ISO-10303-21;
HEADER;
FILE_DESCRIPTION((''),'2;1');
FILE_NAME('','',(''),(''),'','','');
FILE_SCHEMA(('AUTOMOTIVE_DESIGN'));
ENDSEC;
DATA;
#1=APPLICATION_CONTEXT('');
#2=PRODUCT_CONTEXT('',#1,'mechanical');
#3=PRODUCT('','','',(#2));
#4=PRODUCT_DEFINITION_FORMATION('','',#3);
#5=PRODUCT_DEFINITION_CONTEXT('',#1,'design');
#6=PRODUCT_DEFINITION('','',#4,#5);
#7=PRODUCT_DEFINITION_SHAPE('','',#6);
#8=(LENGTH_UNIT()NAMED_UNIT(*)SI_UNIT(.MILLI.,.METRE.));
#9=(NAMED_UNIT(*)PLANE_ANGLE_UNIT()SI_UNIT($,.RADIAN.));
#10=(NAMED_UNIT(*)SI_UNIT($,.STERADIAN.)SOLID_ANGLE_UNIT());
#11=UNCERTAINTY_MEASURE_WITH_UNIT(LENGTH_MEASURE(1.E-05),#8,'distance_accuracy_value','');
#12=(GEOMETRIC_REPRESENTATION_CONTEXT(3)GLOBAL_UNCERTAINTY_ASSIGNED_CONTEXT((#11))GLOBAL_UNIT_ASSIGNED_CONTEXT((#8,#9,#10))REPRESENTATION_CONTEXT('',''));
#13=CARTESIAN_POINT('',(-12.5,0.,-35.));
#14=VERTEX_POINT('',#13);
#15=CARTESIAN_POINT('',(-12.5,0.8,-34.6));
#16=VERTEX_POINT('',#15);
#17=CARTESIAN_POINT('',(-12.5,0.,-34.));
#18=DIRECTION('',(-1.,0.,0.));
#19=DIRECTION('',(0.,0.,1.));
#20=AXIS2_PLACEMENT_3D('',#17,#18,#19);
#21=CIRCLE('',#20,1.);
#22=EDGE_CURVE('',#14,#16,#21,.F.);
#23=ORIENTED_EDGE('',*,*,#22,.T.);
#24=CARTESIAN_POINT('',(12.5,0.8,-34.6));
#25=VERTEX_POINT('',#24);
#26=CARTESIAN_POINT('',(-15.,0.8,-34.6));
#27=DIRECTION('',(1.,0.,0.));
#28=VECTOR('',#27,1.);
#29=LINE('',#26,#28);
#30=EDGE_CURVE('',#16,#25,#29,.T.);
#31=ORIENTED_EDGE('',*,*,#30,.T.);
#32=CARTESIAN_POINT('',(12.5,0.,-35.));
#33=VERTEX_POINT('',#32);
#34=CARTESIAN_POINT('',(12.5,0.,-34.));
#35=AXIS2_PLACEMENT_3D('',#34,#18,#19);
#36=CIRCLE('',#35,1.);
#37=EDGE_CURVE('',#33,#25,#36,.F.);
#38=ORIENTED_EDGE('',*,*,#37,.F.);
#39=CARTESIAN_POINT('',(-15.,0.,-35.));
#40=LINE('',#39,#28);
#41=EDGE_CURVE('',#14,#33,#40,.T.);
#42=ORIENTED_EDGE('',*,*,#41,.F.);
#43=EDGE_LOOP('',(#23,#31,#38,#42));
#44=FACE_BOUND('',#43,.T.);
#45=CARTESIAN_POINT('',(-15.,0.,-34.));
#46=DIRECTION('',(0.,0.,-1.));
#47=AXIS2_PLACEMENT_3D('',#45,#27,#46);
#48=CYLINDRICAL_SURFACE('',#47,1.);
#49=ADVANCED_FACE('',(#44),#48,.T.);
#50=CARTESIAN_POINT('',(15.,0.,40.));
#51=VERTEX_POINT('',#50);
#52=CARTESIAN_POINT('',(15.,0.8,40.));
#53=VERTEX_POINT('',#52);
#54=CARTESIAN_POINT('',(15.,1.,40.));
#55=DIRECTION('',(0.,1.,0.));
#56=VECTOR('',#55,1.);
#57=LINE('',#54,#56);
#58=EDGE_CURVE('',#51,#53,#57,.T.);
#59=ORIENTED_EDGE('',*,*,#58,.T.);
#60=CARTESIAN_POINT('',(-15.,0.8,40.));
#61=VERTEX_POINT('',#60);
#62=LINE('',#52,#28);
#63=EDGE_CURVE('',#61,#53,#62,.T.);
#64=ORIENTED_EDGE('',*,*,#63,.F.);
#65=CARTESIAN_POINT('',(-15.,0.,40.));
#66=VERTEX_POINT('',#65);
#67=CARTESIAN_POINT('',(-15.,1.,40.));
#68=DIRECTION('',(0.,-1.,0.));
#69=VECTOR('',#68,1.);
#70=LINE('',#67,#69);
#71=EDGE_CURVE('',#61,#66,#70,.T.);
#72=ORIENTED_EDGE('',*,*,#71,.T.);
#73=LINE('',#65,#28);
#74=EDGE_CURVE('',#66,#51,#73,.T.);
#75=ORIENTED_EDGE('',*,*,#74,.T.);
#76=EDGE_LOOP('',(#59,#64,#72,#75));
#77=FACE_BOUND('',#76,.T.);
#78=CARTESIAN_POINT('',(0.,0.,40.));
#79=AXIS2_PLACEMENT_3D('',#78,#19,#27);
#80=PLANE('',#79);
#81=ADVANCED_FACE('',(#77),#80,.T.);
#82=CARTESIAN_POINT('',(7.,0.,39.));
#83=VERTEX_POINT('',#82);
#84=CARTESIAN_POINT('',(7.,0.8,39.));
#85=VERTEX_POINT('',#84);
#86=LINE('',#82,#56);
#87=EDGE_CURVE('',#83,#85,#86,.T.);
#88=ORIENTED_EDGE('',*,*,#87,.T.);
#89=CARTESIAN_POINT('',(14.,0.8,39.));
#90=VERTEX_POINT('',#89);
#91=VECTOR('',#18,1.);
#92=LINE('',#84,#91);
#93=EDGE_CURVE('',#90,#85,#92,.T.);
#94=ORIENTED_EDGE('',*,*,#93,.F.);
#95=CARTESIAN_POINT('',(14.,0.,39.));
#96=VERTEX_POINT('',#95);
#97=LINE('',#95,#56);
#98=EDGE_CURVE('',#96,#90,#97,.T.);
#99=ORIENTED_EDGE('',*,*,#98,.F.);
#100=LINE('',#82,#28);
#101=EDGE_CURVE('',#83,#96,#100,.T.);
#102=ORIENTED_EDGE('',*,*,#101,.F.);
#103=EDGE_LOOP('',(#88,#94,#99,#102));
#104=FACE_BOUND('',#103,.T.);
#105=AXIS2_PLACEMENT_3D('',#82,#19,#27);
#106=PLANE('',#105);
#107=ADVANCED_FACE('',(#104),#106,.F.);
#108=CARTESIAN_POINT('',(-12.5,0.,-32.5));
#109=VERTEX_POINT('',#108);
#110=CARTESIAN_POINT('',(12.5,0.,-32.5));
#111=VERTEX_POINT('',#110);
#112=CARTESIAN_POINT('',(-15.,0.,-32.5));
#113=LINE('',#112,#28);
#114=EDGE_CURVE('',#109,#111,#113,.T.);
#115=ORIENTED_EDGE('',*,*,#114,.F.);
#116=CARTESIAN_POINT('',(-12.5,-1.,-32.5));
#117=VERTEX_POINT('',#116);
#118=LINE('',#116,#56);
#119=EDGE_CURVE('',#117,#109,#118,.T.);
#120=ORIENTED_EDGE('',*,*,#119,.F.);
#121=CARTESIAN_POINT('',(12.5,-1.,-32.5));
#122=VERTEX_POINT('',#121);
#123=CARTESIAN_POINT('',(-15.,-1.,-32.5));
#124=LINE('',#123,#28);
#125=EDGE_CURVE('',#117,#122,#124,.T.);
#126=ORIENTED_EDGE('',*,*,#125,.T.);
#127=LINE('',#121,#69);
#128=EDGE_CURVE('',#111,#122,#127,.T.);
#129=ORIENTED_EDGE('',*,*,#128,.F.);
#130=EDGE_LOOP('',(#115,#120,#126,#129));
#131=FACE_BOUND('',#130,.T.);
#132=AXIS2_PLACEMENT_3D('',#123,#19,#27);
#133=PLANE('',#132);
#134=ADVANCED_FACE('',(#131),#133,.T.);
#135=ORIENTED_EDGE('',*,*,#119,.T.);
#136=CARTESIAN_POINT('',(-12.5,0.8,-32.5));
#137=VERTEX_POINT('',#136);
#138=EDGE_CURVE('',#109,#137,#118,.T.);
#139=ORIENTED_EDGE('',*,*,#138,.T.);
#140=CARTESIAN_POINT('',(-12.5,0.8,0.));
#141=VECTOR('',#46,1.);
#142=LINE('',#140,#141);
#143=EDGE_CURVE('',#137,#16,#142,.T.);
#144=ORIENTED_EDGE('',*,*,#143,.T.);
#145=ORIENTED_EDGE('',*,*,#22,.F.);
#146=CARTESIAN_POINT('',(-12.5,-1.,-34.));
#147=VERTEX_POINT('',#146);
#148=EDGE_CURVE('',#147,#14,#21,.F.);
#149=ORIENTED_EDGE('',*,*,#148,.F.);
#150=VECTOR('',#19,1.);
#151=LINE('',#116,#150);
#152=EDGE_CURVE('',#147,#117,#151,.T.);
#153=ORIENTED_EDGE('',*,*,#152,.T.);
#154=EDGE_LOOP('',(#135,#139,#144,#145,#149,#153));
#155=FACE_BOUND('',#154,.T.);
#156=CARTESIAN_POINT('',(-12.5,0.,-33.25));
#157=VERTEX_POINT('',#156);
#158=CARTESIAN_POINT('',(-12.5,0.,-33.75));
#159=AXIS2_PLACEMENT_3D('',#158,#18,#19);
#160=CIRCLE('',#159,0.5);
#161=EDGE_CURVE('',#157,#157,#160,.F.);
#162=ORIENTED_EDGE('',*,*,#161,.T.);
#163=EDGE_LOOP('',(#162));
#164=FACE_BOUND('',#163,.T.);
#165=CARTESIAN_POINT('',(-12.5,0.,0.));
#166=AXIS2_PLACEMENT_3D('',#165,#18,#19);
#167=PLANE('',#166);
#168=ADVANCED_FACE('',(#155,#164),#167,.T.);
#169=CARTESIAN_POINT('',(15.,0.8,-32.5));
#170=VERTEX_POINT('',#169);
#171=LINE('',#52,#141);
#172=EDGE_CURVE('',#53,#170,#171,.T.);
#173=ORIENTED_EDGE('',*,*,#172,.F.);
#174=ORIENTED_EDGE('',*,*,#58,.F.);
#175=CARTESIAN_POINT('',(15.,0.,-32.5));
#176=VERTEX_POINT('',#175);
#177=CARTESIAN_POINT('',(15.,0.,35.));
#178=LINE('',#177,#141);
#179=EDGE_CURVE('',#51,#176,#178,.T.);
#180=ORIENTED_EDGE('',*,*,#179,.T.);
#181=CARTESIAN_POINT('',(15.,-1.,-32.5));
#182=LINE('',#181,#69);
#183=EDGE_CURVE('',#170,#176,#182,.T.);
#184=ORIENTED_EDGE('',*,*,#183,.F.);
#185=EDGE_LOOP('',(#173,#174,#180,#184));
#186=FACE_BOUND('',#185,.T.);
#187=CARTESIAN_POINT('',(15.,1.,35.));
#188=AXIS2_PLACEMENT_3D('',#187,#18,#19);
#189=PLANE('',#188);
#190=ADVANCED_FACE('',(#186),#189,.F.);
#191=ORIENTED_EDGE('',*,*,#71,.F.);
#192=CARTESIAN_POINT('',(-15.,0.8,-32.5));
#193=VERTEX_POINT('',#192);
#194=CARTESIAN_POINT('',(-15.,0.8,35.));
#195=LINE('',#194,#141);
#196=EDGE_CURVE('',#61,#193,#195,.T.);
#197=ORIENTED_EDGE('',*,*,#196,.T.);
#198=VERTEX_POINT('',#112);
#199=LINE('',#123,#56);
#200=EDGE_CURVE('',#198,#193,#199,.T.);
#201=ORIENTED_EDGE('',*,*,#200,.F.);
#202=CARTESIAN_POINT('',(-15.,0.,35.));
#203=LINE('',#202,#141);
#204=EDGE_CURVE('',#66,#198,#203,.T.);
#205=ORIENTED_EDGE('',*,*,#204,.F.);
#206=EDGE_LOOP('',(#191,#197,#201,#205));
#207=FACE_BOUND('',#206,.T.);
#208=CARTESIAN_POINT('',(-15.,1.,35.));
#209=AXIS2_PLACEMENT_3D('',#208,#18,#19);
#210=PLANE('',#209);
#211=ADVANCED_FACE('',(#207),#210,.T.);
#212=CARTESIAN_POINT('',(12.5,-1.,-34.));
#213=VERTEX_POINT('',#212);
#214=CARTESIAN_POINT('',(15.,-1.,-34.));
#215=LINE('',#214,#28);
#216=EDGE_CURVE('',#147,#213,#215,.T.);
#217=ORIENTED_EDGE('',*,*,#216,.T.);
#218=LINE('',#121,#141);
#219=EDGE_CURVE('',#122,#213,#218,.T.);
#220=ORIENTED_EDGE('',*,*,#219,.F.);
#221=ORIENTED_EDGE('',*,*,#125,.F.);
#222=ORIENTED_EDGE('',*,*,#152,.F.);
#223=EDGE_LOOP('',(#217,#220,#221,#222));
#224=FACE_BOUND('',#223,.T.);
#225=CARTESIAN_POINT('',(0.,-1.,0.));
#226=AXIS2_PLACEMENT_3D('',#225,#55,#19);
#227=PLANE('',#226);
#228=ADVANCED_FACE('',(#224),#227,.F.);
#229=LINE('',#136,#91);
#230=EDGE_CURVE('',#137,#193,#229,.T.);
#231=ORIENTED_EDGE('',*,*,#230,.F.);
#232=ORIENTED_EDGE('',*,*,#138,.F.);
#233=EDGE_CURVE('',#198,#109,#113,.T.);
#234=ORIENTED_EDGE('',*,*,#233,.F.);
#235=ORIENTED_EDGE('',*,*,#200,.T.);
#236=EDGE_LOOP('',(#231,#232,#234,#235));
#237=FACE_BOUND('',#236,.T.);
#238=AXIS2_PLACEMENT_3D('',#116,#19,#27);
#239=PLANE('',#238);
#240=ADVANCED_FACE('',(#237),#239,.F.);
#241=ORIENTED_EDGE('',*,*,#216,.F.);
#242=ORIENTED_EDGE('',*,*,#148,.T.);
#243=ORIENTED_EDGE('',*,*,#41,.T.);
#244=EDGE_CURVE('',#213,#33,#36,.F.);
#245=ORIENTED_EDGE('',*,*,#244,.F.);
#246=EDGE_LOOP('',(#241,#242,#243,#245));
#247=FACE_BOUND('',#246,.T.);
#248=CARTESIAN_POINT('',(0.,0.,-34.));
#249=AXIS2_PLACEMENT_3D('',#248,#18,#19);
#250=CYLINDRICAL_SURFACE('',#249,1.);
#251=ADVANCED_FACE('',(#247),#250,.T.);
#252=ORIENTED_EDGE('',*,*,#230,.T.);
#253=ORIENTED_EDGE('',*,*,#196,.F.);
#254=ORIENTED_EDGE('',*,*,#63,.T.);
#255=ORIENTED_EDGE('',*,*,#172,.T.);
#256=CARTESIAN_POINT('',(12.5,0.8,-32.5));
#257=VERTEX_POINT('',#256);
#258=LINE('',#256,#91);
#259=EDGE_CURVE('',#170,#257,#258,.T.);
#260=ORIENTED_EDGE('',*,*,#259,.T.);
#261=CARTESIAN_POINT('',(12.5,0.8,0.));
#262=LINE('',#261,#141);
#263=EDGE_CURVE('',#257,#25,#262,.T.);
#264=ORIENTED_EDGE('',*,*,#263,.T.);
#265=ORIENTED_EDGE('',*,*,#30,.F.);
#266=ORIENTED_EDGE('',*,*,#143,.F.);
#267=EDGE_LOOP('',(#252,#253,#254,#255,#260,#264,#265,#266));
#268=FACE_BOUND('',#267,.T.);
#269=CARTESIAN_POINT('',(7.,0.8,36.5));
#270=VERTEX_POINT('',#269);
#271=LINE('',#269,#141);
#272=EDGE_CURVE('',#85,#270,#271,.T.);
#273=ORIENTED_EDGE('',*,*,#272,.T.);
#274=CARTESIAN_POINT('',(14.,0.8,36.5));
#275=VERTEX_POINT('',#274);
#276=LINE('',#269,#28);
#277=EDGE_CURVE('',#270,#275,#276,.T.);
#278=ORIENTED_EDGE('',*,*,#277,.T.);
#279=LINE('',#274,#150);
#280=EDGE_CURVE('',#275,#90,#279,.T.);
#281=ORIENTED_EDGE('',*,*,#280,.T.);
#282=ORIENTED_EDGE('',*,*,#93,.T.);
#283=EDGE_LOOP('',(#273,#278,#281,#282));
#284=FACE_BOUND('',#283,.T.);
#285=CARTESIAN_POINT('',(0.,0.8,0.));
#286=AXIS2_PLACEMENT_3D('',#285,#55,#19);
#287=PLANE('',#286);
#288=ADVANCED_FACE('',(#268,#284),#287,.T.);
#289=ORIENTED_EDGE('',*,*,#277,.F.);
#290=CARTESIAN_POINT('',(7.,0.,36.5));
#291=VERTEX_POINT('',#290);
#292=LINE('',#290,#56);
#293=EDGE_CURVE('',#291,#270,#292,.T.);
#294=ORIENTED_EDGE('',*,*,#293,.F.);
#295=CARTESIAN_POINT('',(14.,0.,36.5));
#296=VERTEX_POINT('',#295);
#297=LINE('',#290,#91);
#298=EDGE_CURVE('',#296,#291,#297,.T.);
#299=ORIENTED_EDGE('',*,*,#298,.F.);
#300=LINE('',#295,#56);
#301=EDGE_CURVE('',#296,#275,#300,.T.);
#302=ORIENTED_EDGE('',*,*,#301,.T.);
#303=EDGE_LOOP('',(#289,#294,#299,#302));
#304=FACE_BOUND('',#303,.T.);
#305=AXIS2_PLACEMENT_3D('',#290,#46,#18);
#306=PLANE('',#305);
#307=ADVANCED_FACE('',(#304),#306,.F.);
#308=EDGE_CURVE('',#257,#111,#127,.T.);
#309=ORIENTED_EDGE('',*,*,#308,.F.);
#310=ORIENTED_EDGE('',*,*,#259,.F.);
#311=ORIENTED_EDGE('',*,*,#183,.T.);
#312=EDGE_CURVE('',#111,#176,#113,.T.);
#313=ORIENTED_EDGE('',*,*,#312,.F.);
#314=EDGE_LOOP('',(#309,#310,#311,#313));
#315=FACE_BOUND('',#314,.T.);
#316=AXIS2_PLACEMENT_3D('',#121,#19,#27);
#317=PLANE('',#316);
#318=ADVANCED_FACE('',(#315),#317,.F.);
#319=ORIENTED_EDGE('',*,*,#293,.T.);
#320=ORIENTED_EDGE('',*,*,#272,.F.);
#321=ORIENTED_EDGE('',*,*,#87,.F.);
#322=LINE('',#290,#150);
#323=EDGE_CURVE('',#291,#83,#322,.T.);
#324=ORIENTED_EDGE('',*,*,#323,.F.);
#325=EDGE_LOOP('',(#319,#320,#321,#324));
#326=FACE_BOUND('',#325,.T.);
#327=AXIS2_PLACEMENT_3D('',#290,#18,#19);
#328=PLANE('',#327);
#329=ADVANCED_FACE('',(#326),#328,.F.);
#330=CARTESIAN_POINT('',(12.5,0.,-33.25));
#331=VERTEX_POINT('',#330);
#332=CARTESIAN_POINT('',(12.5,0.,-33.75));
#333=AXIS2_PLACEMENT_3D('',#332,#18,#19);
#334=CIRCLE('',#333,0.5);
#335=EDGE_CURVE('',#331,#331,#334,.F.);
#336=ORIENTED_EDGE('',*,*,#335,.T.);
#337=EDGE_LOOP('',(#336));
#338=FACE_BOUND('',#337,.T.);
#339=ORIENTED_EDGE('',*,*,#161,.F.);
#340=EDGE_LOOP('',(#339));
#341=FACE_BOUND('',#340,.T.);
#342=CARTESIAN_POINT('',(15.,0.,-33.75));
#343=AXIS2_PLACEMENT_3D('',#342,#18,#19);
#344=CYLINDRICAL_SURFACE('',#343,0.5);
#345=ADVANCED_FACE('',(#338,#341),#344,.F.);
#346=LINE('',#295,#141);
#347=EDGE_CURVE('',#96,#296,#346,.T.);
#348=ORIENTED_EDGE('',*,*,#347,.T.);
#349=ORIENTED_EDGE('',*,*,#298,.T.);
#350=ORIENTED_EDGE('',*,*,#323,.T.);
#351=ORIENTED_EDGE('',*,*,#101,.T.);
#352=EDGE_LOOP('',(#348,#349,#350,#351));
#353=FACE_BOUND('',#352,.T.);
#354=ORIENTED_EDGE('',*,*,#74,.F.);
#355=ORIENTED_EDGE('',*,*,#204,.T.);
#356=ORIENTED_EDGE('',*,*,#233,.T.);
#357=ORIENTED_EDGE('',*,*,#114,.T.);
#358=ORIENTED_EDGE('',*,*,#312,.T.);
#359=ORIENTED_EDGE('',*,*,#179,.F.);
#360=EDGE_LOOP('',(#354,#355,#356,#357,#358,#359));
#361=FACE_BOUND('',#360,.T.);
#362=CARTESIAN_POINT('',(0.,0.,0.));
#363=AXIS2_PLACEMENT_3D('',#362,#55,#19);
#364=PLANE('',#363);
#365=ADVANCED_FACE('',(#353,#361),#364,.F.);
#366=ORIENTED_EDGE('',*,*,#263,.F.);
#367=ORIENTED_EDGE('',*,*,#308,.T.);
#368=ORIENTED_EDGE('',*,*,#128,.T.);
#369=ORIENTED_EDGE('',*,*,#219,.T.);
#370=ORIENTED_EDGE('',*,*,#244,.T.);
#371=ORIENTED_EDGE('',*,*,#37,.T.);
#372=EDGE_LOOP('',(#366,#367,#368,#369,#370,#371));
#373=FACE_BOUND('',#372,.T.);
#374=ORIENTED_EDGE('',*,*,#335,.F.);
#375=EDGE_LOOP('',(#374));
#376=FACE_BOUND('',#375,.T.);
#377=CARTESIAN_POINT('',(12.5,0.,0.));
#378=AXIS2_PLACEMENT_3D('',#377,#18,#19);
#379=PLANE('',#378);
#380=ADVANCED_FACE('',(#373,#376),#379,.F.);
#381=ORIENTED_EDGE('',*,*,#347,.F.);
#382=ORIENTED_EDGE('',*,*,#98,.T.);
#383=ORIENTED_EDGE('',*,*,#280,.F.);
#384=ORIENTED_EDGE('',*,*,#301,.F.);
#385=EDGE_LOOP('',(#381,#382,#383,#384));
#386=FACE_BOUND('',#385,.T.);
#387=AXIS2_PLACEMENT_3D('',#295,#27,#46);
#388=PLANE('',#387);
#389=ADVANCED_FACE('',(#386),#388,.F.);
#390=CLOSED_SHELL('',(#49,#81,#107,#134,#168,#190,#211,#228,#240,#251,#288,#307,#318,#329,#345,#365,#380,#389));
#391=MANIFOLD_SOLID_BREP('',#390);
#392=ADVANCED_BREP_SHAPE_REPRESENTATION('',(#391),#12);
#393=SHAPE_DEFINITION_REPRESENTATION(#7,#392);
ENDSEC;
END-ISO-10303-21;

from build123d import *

# Parameters (mm, degrees)
SKETCH1_W           = 30
SKETCH1_H           = 70
BOSS_EXTRUDE1_DEPTH = 1
SKETCH5_W           = 30
SKETCH5_H           = 1
BOSS_EXTRUDE3_DEPTH = 5
SKETCH6_W           = 7
SKETCH6_H           = 2.5
CUT_EXTRUDE3_DEPTH  = 1
SKETCH2_W           = 30
SKETCH2_H           = 2.5
BOSS_EXTRUDE4_DEPTH = 1
CUT_EXTRUDE4_START  = -30
SKETCH7_R           = 0.5
CUT_EXTRUDE4_DEPTH  = 30
FILLET1_R           = 1
SKETCH9_W           = 3
SKETCH9_H           = 2
CUT_EXTRUDE5_DEPTH  = 2.5
SKETCH10_W          = 3
SKETCH10_H          = 2
CUT_EXTRUDE6_DEPTH  = 2.5
SKETCH11_W          = 33.967551934
SKETCH11_H          = 76.426629991
CUT_EXTRUDE7_DEPTH  = 0.2


with BuildPart() as part:
    # Sketch1 → Boss-Extrude1 (new body)
    with BuildSketch(Plane(origin=(0, 0, 0), x_dir=(1, 0, 0), z_dir=(0, 1, 0))):
        Rectangle(SKETCH1_W, SKETCH1_H)
    extrude(amount=BOSS_EXTRUDE1_DEPTH)

    # Sketch5 → Boss-Extrude3 (add)
    with BuildSketch(Plane.XY.offset(35)):
        with Locations((0, 0.5)):
            Rectangle(SKETCH5_W, SKETCH5_H)
    extrude(amount=BOSS_EXTRUDE3_DEPTH)

    # Sketch6 → Cut-Extrude3 (cut)
    with BuildSketch(Plane(origin=(0, 1, 0), x_dir=(1, 0, 0), z_dir=(0, 1, 0))):
        with Locations((10.5, -37.75)):
            Rectangle(SKETCH6_W, SKETCH6_H)
    extrude(amount=-CUT_EXTRUDE3_DEPTH, mode=Mode.SUBTRACT)

    # Sketch2 → Boss-Extrude4 (add)
    with BuildSketch(Plane(origin=(0, 0, 0), x_dir=(1, 0, 0), z_dir=(0, 1, 0))):
        with Locations((0, 33.75)):
            Rectangle(SKETCH2_W, SKETCH2_H)
    extrude(amount=-BOSS_EXTRUDE4_DEPTH)

    # Sketch7 → Cut-Extrude4 (cut)
    with BuildSketch(Plane.ZY.offset(15).offset(CUT_EXTRUDE4_START)):
        with Locations((-33.75, 0)):
            Circle(SKETCH7_R)
    extrude(amount=CUT_EXTRUDE4_DEPTH, mode=Mode.SUBTRACT)

    # Fillet1
    fillet1_edges = [part.edges().sort_by_distance(p)[0] for p in [
        (0, -1, -35),
        (0, 1, -35),
    ]]
    fillet(fillet1_edges, radius=FILLET1_R - 0.0001)  # a hair under: the kernel refuses the full size

    # Sketch9 → Cut-Extrude5 (cut)
    with BuildSketch(Plane.ZY.offset(15)):
        with Locations((-34, 0)):
            Rectangle(SKETCH9_W, SKETCH9_H)
    extrude(amount=-CUT_EXTRUDE5_DEPTH, mode=Mode.SUBTRACT)

    # Sketch10 → Cut-Extrude6 (cut)
    with BuildSketch(Plane(origin=(15, 0, 0), x_dir=(0, 0, -1), z_dir=(1, 0, 0))):
        with Locations((34, 0)):
            Rectangle(SKETCH10_W, SKETCH10_H)
    extrude(amount=-CUT_EXTRUDE6_DEPTH, mode=Mode.SUBTRACT)

    # Sketch11 → Cut-Extrude7 (cut)
    with BuildSketch(Plane(origin=(0, 1, 0), x_dir=(1, 0, 0), z_dir=(0, 1, 0))):
        with Locations((-1.983775967, -1.786685004)):
            Rectangle(SKETCH11_W, SKETCH11_H)
    extrude(amount=-CUT_EXTRUDE7_DEPTH, mode=Mode.SUBTRACT)


solid = part.part
